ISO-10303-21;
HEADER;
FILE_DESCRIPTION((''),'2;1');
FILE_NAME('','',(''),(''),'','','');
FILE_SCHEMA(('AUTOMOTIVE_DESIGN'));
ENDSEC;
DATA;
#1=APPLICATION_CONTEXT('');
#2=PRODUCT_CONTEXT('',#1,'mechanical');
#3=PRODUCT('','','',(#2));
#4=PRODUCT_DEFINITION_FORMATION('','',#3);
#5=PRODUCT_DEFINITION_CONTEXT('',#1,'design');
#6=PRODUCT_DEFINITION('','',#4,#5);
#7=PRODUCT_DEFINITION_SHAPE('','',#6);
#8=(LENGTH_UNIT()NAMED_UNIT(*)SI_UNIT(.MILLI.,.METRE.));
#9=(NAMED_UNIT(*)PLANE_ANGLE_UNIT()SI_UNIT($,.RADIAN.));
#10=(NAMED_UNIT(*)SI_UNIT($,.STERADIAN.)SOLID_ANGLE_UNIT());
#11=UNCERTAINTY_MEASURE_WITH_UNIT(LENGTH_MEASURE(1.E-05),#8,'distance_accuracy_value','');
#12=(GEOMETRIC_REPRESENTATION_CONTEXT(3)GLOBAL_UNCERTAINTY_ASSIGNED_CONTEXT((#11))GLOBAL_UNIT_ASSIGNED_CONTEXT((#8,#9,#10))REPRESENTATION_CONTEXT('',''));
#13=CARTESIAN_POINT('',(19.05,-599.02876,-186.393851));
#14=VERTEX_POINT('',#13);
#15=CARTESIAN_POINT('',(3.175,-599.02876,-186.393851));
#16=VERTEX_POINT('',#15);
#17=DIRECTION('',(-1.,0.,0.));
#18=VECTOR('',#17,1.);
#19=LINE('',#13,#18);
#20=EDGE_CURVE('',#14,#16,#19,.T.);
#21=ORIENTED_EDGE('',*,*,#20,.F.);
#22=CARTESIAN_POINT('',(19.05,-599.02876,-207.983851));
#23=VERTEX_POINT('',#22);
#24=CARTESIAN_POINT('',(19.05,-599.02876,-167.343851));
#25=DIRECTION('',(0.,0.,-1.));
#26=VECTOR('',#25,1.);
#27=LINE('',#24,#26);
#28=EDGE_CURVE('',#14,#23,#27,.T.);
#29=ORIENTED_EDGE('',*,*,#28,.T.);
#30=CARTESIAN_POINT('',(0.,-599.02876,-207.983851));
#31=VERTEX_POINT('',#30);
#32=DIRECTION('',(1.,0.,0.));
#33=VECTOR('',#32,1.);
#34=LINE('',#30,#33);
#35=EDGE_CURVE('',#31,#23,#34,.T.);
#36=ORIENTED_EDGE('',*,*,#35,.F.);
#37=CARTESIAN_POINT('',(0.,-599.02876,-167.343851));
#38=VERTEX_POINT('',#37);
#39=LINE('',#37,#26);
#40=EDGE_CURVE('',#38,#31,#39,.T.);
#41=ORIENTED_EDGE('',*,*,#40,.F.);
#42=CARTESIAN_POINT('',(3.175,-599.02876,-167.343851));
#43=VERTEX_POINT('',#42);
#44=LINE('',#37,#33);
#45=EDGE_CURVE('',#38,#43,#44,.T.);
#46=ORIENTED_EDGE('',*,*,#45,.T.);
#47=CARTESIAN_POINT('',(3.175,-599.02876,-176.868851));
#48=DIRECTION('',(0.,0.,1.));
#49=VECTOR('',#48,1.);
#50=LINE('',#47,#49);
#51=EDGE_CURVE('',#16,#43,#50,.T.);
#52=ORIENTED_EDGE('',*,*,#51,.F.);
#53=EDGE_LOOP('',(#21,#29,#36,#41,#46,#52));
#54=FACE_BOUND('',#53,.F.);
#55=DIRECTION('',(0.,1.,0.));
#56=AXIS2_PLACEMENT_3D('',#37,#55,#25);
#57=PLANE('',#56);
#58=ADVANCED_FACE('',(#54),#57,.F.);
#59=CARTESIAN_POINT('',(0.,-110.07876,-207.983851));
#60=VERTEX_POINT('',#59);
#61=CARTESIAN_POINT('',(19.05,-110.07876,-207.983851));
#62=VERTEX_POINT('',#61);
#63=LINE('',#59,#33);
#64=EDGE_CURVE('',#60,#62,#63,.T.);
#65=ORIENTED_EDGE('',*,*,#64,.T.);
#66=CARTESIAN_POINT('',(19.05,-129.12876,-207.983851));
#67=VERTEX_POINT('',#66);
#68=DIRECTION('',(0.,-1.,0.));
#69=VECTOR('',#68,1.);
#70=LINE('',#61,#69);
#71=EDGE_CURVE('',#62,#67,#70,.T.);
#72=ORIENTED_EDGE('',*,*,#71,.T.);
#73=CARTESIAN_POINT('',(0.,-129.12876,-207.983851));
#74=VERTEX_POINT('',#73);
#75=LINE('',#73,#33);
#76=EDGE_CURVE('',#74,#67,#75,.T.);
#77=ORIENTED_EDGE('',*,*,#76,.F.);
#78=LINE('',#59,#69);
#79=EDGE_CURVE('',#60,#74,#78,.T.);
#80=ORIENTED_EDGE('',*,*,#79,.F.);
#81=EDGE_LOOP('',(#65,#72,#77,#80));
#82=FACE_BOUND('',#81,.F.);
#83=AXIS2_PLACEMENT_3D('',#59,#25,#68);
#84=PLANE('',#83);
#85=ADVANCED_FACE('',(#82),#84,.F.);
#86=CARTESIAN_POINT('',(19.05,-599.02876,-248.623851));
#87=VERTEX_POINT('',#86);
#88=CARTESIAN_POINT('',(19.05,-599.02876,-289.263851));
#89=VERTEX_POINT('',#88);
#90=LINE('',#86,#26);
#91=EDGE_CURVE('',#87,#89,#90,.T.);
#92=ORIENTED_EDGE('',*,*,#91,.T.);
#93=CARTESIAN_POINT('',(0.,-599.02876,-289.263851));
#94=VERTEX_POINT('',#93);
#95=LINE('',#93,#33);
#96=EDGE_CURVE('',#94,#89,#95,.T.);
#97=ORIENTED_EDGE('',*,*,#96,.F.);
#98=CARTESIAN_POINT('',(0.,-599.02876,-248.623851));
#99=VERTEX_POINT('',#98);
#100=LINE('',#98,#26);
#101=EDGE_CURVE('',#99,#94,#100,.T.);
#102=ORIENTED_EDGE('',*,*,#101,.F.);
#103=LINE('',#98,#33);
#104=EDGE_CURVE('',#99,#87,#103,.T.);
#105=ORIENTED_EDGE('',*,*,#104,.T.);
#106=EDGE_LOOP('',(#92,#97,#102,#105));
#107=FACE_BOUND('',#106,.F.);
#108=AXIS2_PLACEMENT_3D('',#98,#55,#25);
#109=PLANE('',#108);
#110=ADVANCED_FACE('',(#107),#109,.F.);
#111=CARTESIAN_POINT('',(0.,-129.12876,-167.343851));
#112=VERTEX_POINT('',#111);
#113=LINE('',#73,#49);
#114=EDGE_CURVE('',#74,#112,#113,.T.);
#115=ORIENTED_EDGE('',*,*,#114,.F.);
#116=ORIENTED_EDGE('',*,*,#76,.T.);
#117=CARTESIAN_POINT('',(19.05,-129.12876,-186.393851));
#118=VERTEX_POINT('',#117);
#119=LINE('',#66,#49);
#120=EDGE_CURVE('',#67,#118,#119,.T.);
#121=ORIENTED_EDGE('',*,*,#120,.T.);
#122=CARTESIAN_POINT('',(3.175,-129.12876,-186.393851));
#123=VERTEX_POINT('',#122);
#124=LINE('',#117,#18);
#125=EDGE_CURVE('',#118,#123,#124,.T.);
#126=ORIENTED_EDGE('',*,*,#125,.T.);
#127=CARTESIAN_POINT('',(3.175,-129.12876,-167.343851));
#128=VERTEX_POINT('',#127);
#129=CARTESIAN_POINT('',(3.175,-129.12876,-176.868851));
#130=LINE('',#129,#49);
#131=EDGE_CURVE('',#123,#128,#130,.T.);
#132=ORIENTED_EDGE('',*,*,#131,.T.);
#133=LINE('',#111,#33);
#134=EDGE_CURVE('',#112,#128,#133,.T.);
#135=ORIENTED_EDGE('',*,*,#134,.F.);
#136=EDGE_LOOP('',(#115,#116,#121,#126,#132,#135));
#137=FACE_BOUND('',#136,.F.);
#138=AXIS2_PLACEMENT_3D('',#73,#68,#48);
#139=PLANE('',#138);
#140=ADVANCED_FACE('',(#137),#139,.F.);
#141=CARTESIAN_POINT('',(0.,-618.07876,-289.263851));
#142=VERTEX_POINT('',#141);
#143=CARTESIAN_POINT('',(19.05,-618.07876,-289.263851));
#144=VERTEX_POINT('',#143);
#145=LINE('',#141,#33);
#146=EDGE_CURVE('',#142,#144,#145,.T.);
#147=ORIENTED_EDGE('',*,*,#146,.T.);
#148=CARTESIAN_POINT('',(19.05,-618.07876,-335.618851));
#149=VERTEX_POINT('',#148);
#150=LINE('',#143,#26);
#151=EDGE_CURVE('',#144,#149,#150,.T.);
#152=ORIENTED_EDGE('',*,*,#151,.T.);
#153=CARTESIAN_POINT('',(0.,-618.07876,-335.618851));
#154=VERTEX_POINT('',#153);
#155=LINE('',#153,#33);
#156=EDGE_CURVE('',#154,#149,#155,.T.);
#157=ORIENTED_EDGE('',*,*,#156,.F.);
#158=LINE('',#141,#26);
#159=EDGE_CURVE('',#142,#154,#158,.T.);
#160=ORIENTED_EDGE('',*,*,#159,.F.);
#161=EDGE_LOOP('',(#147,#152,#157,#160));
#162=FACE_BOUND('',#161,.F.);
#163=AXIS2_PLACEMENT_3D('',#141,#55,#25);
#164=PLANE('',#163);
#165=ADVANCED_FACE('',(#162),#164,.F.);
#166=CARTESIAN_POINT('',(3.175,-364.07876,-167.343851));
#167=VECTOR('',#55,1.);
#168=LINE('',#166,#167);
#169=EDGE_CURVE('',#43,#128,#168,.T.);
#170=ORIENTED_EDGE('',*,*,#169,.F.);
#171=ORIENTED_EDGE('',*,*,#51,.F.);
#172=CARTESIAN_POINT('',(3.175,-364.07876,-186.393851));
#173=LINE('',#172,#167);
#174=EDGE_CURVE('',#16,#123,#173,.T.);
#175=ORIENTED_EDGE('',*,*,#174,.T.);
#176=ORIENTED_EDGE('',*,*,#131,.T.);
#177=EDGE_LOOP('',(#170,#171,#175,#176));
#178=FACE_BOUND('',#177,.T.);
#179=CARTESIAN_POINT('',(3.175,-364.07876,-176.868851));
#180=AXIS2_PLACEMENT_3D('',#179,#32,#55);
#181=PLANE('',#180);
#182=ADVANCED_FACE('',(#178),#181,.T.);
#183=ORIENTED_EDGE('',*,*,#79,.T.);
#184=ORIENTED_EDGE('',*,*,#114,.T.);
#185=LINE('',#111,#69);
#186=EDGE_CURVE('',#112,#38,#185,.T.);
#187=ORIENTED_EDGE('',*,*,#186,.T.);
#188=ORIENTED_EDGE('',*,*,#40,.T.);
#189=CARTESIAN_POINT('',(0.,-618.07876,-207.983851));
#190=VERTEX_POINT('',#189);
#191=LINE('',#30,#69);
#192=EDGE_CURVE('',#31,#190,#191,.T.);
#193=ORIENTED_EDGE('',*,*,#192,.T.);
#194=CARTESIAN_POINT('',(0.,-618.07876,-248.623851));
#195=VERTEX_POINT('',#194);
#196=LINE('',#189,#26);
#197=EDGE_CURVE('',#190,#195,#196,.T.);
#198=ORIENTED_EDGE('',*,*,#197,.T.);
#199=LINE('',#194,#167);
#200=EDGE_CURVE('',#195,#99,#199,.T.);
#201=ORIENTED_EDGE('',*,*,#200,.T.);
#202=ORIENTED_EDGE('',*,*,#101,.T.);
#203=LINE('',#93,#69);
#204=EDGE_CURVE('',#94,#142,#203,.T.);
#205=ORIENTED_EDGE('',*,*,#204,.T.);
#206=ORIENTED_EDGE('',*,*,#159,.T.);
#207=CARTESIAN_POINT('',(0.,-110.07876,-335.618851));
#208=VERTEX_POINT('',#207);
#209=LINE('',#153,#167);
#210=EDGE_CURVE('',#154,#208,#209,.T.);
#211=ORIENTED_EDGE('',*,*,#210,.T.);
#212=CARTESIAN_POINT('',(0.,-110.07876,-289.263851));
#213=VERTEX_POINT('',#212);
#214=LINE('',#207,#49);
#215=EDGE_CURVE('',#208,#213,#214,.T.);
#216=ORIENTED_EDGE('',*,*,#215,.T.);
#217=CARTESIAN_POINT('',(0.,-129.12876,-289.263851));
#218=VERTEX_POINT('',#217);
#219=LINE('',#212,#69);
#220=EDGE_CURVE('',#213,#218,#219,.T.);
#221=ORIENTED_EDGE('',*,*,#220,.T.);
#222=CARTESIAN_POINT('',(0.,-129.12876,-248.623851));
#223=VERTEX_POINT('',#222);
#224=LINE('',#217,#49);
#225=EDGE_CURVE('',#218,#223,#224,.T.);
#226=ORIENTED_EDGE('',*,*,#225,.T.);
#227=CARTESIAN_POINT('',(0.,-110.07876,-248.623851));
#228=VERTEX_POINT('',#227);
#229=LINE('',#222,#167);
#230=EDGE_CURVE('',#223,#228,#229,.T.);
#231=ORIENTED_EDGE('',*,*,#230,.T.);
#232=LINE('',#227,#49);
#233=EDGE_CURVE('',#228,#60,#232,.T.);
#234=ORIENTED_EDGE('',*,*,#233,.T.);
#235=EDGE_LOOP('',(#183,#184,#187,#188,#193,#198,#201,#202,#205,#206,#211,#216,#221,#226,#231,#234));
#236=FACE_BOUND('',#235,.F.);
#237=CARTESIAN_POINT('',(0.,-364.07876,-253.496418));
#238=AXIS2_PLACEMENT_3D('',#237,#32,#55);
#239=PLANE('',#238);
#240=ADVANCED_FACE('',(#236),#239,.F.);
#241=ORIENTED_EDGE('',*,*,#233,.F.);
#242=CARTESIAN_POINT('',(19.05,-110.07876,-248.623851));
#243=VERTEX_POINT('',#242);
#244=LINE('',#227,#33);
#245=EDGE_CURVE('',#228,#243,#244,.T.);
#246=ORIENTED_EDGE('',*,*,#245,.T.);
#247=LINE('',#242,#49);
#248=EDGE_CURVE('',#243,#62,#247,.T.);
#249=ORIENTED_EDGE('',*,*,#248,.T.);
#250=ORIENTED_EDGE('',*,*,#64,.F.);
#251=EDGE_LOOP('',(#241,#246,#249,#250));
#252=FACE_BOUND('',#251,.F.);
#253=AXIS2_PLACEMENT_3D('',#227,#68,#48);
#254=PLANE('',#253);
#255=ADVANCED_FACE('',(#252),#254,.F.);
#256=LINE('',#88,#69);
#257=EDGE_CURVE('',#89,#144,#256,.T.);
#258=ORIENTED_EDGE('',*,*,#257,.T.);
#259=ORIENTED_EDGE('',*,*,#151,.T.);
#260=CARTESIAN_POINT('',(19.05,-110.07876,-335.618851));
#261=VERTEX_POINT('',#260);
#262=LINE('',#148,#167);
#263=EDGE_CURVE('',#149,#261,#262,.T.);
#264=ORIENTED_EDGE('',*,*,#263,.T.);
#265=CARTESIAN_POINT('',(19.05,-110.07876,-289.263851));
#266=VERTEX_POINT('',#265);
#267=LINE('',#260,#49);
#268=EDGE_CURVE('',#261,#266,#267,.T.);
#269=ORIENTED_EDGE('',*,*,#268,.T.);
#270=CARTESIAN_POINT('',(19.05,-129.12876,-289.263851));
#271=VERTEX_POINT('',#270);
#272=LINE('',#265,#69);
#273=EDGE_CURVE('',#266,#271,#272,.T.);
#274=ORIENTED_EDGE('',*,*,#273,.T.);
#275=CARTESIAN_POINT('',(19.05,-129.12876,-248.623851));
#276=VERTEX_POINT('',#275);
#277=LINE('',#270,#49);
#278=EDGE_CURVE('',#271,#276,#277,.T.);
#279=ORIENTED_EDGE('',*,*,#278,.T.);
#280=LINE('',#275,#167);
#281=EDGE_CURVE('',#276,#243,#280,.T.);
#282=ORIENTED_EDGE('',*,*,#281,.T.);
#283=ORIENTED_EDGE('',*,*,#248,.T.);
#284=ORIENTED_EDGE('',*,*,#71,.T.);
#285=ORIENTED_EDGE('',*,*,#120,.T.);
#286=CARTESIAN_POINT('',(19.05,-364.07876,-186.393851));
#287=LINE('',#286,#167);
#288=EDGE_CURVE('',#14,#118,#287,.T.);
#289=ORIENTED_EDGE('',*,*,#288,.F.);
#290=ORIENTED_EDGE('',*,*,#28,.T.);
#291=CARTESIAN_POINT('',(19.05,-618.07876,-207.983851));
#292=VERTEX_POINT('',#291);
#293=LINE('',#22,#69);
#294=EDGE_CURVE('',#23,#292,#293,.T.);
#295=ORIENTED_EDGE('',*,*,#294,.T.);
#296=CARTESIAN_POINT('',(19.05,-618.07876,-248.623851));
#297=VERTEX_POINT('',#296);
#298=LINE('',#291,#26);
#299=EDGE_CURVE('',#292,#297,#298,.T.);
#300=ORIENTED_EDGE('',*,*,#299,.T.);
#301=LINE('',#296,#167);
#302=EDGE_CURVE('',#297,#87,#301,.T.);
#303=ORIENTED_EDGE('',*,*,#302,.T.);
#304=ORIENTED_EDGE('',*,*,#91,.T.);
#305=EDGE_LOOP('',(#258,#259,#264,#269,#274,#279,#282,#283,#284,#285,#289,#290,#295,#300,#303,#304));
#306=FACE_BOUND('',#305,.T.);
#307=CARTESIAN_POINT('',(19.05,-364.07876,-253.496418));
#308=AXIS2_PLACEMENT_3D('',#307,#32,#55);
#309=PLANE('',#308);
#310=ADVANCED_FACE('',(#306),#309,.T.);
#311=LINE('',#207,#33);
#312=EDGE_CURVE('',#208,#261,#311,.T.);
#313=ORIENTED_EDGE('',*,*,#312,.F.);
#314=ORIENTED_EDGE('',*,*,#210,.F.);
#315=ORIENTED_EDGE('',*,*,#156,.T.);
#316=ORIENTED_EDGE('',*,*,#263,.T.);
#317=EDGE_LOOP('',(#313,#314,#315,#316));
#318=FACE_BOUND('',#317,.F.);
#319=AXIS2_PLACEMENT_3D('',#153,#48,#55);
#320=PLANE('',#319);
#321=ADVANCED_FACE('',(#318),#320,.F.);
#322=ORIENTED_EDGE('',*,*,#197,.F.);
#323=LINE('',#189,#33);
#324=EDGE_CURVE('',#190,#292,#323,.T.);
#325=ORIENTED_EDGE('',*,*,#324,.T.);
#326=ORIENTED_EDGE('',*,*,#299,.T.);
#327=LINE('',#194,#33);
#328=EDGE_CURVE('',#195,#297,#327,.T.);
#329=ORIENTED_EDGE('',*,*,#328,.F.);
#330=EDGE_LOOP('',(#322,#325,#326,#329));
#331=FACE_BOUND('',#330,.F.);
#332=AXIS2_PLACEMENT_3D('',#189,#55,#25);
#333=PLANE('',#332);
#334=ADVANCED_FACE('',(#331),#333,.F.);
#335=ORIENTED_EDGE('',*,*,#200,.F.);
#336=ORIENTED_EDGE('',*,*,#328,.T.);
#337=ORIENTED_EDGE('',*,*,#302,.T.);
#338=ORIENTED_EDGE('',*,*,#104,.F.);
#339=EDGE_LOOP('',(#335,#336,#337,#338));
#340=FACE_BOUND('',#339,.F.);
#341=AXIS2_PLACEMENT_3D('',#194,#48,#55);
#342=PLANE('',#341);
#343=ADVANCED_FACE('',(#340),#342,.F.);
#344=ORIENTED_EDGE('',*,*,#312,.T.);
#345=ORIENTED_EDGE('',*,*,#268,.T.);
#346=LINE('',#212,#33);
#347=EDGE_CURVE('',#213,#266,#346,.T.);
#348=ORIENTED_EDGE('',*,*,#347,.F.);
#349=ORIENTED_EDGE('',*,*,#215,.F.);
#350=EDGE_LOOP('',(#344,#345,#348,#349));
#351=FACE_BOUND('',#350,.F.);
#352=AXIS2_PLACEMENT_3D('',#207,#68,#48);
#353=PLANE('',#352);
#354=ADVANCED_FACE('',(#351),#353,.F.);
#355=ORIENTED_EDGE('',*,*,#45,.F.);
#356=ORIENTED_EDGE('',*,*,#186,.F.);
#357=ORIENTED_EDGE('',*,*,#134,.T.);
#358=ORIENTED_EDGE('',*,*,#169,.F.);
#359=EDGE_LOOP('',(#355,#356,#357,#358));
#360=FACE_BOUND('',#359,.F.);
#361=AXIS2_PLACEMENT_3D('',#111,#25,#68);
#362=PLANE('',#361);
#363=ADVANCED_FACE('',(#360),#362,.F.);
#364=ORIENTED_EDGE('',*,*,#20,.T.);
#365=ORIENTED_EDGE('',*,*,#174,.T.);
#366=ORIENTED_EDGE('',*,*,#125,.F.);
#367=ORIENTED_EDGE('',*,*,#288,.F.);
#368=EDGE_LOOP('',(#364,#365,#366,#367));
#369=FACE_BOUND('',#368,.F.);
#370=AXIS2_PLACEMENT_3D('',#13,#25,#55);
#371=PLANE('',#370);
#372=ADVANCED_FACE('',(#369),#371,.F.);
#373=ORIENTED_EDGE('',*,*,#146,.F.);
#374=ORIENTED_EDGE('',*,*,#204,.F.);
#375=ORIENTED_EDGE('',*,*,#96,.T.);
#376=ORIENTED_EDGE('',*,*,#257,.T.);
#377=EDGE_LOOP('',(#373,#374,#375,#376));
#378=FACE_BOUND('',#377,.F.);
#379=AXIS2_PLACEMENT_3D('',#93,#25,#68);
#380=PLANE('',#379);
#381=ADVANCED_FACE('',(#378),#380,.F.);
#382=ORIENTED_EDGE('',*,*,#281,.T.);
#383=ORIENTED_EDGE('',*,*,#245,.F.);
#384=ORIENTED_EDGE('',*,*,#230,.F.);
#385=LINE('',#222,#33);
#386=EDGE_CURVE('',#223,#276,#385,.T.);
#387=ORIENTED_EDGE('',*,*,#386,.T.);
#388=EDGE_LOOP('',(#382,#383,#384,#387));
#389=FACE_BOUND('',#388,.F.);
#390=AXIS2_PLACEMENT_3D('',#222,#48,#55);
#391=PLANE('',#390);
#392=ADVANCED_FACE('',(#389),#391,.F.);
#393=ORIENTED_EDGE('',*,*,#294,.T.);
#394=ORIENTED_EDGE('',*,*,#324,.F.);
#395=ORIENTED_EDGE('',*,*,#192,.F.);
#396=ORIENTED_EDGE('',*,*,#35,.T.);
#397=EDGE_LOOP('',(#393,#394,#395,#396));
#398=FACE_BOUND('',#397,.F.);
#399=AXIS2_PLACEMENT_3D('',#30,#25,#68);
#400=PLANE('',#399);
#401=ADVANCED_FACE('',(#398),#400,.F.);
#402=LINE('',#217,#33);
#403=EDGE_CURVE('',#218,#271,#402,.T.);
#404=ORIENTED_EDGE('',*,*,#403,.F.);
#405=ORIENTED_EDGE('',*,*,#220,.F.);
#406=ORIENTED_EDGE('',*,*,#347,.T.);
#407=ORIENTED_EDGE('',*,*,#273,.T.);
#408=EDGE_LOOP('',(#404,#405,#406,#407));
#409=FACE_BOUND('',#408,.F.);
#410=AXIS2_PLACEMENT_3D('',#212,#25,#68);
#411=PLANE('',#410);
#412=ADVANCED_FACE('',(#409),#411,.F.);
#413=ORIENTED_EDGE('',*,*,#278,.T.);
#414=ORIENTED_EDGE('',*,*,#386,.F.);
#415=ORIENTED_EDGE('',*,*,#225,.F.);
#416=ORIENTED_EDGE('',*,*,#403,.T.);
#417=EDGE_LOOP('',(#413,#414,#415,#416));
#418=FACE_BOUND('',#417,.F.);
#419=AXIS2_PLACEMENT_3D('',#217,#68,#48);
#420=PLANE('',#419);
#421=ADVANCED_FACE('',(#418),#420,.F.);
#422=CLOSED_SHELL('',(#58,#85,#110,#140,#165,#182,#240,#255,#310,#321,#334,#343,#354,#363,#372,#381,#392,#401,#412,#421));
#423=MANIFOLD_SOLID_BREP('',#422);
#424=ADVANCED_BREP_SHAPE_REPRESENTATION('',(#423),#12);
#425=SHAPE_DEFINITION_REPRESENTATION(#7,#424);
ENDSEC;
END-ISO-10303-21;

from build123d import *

# Parameters (mm, degrees)
F1_DEPTH = 19.05
F2_W     = 469.9
F2_H     = 19.05
F3_DEPTH = 15.875


# Not quite as in the source:
# - a feature names something its author has since deleted; it is built from what else it names


with BuildPart() as f1:
    # F0 (on Right) → F1 (new body)
    with BuildSketch(Plane.YZ):
        Polygon((-599.0287601471, -207.9838508803), (-618.0787601471, -207.9838508803), (-618.0787601471, -248.6238508803), (-599.0287601471, -248.6238508803), (-599.0287601471, -289.2638508803), (-618.0787601471, -289.2638508803), (-618.0787601471, -335.6188508803), (-110.0787601471, -335.6188508803), (-110.0787601471, -289.2638508803), (-129.1287601471, -289.2638508803), (-129.1287601471, -248.6238508803), (-110.0787601471, -248.6238508803), (-110.0787601471, -207.9838508803), (-129.1287601471, -207.9838508803), (-129.1287601471, -167.3438508803), (-599.0287601471, -167.3438508803), align=None)
    extrude(amount=F1_DEPTH)

    # F2 (on face) → F3 (cut)
    with BuildSketch(Plane.YZ.offset(19.05)):
        with Locations((-364.0787601471, -176.8688508803)):
            Rectangle(F2_W, F2_H)
    extrude(amount=-F3_DEPTH, mode=Mode.SUBTRACT)


solid = f1.part
